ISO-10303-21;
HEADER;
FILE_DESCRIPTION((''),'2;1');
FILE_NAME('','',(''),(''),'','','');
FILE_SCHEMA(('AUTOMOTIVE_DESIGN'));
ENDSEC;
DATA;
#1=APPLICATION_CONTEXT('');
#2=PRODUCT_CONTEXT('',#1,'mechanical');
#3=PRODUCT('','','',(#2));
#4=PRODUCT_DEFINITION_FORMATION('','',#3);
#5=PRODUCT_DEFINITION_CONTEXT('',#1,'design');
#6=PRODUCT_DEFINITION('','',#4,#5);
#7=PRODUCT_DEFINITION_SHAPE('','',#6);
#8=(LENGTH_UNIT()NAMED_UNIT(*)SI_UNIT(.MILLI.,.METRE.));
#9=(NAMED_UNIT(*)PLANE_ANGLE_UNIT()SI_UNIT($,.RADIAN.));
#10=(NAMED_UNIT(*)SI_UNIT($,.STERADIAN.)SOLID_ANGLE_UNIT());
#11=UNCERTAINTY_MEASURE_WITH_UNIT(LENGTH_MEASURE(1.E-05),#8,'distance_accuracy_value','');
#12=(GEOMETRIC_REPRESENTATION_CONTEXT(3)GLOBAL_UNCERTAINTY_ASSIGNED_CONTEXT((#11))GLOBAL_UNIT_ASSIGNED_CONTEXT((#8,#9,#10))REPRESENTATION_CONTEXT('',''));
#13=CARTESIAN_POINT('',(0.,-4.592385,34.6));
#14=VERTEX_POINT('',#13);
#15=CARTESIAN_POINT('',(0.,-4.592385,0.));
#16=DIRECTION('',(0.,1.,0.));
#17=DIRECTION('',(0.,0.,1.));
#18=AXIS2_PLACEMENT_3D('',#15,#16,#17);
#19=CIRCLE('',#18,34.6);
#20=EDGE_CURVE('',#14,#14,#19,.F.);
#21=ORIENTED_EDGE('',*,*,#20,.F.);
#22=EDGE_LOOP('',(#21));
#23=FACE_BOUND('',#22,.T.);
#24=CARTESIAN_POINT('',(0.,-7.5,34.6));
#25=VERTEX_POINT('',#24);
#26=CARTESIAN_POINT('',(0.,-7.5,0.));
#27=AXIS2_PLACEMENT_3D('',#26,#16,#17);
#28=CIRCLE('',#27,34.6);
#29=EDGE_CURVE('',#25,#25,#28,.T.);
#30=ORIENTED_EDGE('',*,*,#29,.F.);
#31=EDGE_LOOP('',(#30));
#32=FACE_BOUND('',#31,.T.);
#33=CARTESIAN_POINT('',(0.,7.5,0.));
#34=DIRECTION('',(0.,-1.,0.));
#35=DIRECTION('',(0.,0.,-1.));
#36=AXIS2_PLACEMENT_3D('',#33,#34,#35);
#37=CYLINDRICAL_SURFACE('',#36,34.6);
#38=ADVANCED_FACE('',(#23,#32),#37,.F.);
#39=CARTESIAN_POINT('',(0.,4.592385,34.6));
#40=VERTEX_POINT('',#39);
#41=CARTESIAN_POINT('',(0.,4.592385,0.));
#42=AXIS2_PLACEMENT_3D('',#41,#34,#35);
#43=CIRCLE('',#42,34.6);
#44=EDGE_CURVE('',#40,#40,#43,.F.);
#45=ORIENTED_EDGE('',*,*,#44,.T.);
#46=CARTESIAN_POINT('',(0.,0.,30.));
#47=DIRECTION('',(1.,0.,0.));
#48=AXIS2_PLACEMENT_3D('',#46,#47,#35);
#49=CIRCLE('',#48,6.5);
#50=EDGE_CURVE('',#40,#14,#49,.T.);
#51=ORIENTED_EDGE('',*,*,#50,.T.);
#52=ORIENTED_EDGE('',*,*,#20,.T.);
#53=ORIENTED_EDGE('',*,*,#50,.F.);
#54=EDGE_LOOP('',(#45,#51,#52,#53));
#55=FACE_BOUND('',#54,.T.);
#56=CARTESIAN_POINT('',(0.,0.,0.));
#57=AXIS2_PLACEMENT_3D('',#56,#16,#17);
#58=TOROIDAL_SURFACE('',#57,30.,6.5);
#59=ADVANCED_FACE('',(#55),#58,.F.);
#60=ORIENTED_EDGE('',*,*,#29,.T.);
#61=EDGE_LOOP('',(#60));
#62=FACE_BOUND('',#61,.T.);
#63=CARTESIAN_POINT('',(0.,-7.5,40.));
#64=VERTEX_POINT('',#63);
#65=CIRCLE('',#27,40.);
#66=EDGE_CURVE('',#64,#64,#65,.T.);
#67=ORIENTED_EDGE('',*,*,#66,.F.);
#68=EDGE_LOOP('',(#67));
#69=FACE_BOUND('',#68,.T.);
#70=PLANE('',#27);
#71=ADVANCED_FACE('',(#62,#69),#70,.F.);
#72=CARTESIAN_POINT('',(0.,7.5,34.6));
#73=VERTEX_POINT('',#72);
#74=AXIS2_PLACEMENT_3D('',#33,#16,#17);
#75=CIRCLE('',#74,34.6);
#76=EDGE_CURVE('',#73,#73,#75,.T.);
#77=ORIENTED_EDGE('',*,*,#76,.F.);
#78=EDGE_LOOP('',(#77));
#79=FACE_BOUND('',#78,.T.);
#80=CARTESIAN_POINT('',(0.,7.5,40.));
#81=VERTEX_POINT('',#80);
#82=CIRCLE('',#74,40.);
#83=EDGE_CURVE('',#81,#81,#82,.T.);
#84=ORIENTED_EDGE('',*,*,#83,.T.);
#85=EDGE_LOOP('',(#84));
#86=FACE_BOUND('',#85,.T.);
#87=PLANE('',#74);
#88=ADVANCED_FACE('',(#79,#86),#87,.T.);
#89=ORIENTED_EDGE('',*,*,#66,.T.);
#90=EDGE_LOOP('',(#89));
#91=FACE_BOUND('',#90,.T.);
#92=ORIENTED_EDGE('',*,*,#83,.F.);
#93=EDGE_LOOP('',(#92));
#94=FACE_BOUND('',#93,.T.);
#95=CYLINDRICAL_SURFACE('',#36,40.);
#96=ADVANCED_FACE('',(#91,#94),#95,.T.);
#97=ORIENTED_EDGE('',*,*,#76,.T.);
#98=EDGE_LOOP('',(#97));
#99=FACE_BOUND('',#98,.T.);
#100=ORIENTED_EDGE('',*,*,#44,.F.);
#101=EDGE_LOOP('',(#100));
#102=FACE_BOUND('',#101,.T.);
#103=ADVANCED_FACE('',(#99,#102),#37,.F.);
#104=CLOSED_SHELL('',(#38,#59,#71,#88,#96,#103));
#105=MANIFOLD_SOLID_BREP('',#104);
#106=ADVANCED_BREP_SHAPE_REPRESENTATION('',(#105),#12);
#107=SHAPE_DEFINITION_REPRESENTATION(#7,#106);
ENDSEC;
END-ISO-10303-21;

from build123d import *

# Parameters (mm, degrees)
SKETCH1_R           = 40
SKETCH1_R_2         = 34.6
BOSS_EXTRUDE1_DEPTH = 7.5


# Read off the part's stored shape, not the designer's step: Cut-Sweep1
with BuildPart() as part:
    # Sketch1 → Boss-Extrude1 (new, symmetric)
    with BuildSketch(Plane(origin=(0, 0, 0), x_dir=(1, 0, 0), z_dir=(0, 1, 0))):
        with Locations(Location((0, 0, 0), (0, 0, 270))):
            Circle(SKETCH1_R)
        with Locations(Location((0, 0, 0), (0, 0, 270))):
            Circle(SKETCH1_R_2, mode=Mode.SUBTRACT)
    extrude(amount=BOSS_EXTRUDE1_DEPTH, both=True)

    # Cut-Sweep1 outline → Cut-Sweep1 (revolve, cut)
    with BuildSketch(Plane.XY):
        with BuildLine():
            Line((34.6, 4.592385001), (34.6, -4.592385001))
            ThreePointArc((34.6, -4.592385001), (36.5, 0), (34.6, 4.592385001))
        make_face()
    revolve(axis=Axis((0, 0, 0), (0, 1, 0)), mode=Mode.SUBTRACT)


solid = part.part
